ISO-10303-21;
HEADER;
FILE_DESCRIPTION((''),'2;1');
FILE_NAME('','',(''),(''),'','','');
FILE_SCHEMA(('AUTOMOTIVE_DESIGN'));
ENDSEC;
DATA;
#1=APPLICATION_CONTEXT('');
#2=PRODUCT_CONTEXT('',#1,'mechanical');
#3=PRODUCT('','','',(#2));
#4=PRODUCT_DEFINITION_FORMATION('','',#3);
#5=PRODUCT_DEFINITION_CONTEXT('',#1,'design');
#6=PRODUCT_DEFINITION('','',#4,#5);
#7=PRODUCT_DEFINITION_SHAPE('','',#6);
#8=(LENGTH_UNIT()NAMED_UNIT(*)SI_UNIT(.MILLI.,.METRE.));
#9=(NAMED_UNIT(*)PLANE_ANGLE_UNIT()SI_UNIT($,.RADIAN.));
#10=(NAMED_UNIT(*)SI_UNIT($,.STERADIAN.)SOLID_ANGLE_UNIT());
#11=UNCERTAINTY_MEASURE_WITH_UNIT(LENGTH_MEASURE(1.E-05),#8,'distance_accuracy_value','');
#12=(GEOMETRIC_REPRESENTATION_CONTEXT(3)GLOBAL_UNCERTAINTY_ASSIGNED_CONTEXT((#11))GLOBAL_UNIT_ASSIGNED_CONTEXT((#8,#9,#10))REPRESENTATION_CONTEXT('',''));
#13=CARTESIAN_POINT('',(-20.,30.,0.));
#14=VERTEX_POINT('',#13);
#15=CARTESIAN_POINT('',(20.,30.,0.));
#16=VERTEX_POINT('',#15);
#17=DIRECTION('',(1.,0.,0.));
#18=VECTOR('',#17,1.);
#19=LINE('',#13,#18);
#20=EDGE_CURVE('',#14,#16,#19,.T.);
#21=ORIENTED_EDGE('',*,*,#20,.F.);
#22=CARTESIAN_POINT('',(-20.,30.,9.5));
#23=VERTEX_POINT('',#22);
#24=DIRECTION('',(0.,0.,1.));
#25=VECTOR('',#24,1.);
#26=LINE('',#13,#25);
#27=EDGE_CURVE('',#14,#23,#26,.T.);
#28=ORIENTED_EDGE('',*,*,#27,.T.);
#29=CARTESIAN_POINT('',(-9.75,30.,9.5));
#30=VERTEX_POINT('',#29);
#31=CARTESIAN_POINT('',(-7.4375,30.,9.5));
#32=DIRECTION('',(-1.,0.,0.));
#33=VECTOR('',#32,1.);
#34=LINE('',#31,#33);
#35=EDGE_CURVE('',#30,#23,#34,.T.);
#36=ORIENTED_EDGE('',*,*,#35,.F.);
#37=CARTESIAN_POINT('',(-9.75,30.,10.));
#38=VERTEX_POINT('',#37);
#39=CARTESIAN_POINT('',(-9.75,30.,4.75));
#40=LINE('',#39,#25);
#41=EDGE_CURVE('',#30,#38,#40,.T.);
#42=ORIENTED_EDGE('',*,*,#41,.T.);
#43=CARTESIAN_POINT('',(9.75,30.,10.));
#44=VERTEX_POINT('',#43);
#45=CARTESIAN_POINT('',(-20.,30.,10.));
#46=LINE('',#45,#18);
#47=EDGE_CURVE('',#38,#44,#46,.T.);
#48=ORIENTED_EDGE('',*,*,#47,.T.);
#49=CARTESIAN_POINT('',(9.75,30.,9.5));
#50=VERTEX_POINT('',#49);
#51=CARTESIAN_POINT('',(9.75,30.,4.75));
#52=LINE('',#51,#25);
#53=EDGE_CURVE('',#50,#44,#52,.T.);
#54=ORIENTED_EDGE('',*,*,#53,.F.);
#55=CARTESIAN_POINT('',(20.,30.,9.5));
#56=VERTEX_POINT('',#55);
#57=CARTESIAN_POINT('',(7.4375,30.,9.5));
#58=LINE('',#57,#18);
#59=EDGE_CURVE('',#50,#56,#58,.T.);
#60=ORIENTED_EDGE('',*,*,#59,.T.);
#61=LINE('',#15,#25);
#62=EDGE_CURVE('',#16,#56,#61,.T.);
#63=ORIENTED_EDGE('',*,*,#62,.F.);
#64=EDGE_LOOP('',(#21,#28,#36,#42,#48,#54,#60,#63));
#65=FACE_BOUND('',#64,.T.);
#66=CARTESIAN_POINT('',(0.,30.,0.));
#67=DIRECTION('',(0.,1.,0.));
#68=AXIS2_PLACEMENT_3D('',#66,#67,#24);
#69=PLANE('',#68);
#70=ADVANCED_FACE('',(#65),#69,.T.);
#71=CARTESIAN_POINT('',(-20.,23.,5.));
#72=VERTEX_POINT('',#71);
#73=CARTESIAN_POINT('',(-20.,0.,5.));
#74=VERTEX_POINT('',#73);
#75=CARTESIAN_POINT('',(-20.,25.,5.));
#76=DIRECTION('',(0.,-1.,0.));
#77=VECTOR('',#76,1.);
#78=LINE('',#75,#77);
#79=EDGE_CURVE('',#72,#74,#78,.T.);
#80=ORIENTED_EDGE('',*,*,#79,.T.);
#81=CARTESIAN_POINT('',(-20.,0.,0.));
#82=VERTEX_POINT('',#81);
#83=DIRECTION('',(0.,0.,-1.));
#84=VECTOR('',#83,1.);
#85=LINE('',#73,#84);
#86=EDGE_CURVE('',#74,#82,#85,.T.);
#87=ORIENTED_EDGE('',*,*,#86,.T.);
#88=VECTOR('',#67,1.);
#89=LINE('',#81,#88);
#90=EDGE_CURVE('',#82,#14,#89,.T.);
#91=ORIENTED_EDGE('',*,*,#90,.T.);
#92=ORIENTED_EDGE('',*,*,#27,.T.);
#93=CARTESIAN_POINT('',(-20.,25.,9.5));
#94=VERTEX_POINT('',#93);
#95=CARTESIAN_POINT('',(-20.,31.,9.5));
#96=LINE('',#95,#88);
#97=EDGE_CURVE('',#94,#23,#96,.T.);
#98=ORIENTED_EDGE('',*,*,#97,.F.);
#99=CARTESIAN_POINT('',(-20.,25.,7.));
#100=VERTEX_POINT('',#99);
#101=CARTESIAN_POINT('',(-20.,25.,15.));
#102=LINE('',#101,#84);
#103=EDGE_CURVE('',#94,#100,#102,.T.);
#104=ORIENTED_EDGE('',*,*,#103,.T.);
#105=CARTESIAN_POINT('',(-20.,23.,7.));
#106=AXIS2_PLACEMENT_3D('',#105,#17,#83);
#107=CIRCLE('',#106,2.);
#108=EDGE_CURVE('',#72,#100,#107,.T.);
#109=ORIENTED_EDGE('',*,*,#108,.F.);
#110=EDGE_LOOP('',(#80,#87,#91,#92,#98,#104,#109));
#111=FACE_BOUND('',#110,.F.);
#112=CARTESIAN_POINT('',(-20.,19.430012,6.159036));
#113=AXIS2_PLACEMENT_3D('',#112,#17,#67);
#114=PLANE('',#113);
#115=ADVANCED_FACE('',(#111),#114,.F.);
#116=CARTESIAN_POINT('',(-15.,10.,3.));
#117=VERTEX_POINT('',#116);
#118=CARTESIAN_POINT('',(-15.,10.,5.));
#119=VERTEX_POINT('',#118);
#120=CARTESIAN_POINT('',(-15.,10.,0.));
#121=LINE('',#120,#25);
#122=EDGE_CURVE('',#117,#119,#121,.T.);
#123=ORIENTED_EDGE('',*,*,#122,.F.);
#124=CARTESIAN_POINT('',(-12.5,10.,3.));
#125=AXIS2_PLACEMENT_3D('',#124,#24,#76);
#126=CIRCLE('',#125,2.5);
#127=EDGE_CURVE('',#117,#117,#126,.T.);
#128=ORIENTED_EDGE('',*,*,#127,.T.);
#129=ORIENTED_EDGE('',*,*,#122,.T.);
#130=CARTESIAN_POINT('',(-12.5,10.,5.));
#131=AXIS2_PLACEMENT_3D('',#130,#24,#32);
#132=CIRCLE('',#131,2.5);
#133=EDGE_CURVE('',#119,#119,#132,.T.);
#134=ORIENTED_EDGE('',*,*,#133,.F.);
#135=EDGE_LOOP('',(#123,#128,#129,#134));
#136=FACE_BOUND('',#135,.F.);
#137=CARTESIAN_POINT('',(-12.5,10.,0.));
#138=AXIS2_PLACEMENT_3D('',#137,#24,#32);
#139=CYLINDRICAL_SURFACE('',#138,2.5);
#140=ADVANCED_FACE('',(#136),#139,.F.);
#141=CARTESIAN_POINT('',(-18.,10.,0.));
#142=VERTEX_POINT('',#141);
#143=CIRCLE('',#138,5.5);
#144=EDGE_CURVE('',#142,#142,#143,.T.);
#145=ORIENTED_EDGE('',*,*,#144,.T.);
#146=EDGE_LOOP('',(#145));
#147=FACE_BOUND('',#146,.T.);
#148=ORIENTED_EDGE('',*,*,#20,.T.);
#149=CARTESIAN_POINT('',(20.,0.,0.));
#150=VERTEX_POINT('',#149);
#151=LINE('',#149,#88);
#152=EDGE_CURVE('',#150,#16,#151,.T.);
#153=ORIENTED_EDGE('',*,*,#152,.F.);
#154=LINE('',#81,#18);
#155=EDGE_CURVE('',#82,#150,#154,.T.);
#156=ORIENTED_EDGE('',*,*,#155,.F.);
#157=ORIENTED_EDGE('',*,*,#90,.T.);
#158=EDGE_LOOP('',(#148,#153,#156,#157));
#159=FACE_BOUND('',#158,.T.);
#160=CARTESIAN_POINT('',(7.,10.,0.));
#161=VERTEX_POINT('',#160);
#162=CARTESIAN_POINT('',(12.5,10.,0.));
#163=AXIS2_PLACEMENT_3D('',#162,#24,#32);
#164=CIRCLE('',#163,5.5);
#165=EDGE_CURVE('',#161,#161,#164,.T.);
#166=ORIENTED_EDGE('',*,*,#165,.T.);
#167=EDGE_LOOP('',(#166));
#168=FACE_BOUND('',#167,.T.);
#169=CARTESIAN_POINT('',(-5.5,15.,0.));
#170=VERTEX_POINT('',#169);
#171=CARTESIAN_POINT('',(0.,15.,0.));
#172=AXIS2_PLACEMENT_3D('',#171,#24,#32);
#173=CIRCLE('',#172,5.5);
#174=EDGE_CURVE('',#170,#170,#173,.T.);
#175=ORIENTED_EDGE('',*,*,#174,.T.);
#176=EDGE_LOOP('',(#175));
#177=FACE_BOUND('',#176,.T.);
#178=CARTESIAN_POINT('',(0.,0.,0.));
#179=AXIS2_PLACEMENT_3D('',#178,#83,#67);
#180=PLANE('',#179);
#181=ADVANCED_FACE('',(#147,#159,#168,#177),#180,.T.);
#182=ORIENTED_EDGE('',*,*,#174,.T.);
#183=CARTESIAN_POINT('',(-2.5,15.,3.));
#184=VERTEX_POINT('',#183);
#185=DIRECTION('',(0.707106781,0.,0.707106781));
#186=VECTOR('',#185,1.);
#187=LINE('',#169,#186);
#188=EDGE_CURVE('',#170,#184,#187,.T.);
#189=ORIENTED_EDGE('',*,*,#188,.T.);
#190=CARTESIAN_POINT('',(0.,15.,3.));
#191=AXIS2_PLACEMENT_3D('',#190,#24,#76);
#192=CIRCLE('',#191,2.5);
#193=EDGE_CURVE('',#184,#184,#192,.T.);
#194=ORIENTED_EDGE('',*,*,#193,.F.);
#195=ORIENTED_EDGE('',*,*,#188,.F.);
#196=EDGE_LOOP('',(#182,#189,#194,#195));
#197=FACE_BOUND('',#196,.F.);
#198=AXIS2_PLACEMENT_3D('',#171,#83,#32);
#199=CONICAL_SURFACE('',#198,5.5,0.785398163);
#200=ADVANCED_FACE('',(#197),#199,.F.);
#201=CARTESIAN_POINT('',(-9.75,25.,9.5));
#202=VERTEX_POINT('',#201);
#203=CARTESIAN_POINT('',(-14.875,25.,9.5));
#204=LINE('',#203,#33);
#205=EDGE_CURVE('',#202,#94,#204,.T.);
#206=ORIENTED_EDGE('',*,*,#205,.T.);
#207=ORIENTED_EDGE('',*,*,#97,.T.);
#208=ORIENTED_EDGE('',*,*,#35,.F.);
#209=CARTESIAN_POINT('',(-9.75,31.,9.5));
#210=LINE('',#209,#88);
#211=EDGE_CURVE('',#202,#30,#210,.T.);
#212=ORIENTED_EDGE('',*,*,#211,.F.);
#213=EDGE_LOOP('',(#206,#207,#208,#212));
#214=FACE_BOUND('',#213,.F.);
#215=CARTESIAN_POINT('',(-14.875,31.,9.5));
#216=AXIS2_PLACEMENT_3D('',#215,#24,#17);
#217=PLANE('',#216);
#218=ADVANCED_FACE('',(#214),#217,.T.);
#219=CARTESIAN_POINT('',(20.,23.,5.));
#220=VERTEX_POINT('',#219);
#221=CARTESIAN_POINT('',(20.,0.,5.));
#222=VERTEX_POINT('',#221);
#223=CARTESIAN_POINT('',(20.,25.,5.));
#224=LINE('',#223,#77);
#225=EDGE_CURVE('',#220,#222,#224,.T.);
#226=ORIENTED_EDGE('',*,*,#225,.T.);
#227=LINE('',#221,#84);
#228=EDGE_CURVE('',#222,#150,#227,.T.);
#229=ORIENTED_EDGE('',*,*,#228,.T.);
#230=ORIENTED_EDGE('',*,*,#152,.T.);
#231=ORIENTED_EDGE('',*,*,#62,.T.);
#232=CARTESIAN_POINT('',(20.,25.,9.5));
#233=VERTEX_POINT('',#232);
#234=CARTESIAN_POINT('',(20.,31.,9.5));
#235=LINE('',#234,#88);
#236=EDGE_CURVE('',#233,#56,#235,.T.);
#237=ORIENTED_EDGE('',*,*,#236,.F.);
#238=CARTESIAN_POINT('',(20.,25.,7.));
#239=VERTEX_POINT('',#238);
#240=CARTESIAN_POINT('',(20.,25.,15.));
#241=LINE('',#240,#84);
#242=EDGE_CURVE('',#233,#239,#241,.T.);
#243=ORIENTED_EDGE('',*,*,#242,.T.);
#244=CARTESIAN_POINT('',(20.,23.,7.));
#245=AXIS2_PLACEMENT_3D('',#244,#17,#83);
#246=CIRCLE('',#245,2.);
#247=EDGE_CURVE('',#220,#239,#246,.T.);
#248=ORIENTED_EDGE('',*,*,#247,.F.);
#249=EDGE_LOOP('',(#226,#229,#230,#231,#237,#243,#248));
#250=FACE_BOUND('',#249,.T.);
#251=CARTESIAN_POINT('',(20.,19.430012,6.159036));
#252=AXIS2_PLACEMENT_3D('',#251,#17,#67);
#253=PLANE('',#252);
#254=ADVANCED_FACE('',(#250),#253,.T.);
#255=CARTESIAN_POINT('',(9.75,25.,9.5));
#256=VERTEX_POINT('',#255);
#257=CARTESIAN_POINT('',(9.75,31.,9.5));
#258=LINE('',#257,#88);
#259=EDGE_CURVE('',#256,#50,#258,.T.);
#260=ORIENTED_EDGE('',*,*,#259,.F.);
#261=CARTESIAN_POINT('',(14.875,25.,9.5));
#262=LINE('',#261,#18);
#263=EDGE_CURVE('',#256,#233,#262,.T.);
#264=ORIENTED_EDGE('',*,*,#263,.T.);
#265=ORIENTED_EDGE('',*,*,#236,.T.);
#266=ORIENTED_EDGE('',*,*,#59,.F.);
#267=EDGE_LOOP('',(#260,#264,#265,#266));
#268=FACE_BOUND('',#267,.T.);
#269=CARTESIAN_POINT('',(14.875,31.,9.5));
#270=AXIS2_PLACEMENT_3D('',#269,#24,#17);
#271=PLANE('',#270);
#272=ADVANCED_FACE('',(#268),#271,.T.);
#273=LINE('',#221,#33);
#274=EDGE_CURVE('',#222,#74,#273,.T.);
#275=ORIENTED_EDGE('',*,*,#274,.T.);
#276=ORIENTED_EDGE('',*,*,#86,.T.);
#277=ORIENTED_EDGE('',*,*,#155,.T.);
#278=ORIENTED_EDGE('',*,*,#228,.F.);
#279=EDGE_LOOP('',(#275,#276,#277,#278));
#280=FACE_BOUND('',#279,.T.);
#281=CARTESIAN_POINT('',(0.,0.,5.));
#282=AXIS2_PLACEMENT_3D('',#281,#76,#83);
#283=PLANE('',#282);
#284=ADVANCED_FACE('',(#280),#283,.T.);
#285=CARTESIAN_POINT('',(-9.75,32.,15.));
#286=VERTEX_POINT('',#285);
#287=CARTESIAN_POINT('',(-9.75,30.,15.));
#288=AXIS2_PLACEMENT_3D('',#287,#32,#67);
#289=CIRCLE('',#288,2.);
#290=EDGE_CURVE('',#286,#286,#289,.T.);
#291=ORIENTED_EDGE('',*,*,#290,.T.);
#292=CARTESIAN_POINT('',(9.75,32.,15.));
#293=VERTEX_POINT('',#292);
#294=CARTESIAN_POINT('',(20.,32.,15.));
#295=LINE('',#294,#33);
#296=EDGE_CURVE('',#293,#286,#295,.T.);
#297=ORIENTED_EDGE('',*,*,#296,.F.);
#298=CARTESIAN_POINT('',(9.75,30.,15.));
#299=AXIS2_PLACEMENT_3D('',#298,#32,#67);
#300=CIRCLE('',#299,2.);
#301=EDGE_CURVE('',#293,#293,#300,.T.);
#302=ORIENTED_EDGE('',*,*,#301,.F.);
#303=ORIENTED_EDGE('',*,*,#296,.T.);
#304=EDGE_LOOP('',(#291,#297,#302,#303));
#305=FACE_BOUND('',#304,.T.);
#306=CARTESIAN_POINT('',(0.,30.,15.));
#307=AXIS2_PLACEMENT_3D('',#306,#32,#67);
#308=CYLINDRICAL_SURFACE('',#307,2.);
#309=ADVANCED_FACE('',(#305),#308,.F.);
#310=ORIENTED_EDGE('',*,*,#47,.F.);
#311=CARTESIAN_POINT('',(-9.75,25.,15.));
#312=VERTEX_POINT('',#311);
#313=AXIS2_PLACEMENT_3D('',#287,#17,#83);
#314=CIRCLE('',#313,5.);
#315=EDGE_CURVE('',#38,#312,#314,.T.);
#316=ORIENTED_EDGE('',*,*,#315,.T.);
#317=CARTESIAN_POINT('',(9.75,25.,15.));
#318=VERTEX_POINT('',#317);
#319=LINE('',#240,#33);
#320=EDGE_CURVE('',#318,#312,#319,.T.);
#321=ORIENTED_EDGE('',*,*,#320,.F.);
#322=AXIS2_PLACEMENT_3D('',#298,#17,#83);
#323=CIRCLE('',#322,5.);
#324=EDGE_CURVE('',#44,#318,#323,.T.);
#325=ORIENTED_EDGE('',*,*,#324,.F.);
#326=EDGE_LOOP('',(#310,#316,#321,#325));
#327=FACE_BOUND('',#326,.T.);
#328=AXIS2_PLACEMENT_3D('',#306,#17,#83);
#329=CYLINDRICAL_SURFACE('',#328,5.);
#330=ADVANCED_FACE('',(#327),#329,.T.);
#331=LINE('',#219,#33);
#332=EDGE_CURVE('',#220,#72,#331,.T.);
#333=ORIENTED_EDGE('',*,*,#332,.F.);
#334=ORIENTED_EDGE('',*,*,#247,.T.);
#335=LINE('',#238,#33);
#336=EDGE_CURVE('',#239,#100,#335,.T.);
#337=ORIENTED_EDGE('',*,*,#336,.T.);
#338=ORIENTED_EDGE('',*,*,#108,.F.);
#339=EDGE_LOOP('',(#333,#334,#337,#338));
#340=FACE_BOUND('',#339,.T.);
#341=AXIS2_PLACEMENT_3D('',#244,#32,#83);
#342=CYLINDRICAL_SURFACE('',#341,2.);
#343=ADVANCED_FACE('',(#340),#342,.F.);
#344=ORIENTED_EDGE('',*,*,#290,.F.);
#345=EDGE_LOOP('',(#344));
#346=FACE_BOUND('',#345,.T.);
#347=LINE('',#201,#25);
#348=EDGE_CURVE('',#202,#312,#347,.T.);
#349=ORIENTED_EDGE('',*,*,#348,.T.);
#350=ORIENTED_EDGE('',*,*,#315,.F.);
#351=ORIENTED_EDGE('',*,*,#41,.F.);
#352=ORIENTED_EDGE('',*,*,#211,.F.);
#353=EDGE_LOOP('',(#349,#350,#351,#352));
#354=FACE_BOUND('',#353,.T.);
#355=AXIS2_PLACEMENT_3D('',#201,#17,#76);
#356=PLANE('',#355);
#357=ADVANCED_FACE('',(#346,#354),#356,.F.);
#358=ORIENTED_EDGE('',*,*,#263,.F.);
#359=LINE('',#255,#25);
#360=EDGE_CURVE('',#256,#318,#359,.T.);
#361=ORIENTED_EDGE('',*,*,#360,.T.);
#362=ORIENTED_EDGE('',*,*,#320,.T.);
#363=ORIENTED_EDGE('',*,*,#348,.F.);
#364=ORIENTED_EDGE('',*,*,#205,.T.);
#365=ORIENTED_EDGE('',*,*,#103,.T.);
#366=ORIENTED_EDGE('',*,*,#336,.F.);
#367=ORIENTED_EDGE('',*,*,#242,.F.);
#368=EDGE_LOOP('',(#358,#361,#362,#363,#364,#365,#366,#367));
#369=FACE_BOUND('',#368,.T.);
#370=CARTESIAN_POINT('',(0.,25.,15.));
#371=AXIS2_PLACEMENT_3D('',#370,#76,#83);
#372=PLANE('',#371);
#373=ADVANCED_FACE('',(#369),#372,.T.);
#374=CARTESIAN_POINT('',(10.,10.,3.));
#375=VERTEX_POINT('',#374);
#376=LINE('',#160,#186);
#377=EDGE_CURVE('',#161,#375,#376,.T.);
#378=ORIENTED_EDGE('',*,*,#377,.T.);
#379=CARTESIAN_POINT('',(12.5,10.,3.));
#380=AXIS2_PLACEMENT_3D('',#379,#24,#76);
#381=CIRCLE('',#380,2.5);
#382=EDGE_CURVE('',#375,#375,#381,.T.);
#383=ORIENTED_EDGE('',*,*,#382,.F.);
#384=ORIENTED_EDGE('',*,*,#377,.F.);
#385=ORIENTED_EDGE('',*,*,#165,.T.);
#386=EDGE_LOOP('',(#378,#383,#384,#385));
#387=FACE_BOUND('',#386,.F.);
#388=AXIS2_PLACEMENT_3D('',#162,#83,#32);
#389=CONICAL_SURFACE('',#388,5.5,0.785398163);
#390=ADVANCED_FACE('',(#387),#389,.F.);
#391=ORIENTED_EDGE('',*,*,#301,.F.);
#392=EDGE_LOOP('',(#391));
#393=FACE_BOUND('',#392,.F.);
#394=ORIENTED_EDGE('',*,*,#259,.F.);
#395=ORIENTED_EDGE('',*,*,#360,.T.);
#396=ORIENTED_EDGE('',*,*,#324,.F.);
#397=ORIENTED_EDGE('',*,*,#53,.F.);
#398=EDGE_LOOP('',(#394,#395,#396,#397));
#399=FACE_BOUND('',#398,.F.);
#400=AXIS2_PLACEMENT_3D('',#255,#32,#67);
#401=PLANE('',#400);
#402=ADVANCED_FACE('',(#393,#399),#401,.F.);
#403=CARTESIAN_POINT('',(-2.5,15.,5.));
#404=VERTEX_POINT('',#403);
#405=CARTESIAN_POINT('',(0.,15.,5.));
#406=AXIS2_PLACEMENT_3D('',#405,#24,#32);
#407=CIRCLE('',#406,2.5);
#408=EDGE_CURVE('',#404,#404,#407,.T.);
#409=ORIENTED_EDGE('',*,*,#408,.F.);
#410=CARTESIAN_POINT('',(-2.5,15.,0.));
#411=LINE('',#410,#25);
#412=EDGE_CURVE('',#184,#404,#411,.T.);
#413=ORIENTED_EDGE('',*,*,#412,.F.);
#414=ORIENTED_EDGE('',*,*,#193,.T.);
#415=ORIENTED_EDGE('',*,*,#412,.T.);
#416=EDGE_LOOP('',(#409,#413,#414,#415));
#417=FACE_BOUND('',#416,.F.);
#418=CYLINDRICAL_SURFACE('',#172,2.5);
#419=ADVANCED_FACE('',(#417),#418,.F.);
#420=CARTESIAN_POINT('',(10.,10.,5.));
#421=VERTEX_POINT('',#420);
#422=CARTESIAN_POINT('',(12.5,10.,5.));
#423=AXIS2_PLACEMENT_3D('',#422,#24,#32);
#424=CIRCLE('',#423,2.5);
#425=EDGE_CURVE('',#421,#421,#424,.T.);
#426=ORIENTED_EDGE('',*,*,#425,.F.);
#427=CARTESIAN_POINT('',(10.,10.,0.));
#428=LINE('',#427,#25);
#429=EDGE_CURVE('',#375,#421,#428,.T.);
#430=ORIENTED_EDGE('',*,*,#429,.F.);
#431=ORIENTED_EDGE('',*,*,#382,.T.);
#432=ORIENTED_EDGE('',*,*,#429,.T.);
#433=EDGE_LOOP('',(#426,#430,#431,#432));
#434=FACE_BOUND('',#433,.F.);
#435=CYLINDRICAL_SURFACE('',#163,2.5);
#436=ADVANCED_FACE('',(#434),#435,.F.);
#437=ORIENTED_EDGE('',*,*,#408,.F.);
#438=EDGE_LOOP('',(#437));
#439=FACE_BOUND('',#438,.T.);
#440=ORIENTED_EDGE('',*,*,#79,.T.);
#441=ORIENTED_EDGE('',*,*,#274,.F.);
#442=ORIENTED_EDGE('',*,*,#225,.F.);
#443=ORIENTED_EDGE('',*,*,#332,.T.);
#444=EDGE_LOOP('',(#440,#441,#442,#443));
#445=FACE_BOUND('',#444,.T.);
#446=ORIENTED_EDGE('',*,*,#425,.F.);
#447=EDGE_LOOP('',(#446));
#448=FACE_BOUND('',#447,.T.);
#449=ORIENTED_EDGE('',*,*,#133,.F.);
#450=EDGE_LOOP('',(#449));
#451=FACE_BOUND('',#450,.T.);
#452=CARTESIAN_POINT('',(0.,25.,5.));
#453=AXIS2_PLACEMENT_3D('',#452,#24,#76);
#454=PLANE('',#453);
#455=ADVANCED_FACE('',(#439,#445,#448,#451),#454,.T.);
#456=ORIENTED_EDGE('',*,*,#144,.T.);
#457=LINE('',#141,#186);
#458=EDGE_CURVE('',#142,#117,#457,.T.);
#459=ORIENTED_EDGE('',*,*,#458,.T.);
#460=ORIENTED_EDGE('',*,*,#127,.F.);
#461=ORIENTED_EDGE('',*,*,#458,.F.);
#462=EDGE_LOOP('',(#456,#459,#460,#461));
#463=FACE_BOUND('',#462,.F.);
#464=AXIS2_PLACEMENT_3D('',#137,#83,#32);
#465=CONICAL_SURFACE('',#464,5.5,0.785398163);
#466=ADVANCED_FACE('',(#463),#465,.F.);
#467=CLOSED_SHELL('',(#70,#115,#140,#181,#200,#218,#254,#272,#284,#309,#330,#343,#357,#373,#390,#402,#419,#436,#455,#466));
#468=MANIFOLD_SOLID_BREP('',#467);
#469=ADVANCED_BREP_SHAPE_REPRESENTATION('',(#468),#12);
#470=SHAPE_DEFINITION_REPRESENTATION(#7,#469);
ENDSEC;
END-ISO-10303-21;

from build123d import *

# Parameters (mm, degrees)
F0_R           = 2
F1_DEPTH       = 20
F3_W           = 10.25
F3_H           = 12
F4_DEPTH       = 10.501
F5_R           = 2
F7_D           = 5
F7_CSINK_D     = 11
F7_CSINK_ANGLE = 90


# Not quite as in the source:
# - a pattern or mirror of a feature is missing from the dataset's text; its kind, count and spacing are read off the source's solid


with BuildPart() as f1:
    # F0 (on Right) → F1 (new body, symmetric)
    with BuildSketch(Plane.YZ):
        with BuildLine():
            Line((0, 5), (0, 0))
            Line((0, 0), (30, 0))
            Line((30, 0), (30, 10))
            ThreePointArc((30, 10), (33.5355339059, 18.5355339059), (25, 15))
            Line((25, 15), (25, 5))
            Line((25, 5), (0, 5))
        make_face()
        with Locations((30, 15)):
            Circle(F0_R, mode=Mode.SUBTRACT)
    extrude(amount=F1_DEPTH, both=True)

    # F3 (on offset) → F4 (cut, through all)
    with BuildSketch(Plane.XY.offset(9.5)):
        with Locations((14.875, 31)):
            Rectangle(F3_W, F3_H)
    f4 = extrude(amount=F4_DEPTH, mode=Mode.SUBTRACT)

    # F4_copies: F4 across plane
    add(f4.mirror(Plane(origin=(0, 0, 0), x_dir=(0, 0, -1), z_dir=(-1, 0, 0))), mode=Mode.SUBTRACT)

    # F5
    f5_edges = [f1.edges().sort_by_distance(p)[0] for p in [
        (0, 25, 5),
    ]]
    fillet(f5_edges, radius=F5_R)

    # F7 (through all)
    with Locations(Plane(origin=(0, 0, 0), x_dir=(1, 0, 0), z_dir=(0, 0, -1))):
        with Locations((-12.5, -10), (0, -15), (12.5, -10)):
            CounterSinkHole(F7_D / 2, F7_CSINK_D / 2, counter_sink_angle=F7_CSINK_ANGLE)


solid = f1.part
